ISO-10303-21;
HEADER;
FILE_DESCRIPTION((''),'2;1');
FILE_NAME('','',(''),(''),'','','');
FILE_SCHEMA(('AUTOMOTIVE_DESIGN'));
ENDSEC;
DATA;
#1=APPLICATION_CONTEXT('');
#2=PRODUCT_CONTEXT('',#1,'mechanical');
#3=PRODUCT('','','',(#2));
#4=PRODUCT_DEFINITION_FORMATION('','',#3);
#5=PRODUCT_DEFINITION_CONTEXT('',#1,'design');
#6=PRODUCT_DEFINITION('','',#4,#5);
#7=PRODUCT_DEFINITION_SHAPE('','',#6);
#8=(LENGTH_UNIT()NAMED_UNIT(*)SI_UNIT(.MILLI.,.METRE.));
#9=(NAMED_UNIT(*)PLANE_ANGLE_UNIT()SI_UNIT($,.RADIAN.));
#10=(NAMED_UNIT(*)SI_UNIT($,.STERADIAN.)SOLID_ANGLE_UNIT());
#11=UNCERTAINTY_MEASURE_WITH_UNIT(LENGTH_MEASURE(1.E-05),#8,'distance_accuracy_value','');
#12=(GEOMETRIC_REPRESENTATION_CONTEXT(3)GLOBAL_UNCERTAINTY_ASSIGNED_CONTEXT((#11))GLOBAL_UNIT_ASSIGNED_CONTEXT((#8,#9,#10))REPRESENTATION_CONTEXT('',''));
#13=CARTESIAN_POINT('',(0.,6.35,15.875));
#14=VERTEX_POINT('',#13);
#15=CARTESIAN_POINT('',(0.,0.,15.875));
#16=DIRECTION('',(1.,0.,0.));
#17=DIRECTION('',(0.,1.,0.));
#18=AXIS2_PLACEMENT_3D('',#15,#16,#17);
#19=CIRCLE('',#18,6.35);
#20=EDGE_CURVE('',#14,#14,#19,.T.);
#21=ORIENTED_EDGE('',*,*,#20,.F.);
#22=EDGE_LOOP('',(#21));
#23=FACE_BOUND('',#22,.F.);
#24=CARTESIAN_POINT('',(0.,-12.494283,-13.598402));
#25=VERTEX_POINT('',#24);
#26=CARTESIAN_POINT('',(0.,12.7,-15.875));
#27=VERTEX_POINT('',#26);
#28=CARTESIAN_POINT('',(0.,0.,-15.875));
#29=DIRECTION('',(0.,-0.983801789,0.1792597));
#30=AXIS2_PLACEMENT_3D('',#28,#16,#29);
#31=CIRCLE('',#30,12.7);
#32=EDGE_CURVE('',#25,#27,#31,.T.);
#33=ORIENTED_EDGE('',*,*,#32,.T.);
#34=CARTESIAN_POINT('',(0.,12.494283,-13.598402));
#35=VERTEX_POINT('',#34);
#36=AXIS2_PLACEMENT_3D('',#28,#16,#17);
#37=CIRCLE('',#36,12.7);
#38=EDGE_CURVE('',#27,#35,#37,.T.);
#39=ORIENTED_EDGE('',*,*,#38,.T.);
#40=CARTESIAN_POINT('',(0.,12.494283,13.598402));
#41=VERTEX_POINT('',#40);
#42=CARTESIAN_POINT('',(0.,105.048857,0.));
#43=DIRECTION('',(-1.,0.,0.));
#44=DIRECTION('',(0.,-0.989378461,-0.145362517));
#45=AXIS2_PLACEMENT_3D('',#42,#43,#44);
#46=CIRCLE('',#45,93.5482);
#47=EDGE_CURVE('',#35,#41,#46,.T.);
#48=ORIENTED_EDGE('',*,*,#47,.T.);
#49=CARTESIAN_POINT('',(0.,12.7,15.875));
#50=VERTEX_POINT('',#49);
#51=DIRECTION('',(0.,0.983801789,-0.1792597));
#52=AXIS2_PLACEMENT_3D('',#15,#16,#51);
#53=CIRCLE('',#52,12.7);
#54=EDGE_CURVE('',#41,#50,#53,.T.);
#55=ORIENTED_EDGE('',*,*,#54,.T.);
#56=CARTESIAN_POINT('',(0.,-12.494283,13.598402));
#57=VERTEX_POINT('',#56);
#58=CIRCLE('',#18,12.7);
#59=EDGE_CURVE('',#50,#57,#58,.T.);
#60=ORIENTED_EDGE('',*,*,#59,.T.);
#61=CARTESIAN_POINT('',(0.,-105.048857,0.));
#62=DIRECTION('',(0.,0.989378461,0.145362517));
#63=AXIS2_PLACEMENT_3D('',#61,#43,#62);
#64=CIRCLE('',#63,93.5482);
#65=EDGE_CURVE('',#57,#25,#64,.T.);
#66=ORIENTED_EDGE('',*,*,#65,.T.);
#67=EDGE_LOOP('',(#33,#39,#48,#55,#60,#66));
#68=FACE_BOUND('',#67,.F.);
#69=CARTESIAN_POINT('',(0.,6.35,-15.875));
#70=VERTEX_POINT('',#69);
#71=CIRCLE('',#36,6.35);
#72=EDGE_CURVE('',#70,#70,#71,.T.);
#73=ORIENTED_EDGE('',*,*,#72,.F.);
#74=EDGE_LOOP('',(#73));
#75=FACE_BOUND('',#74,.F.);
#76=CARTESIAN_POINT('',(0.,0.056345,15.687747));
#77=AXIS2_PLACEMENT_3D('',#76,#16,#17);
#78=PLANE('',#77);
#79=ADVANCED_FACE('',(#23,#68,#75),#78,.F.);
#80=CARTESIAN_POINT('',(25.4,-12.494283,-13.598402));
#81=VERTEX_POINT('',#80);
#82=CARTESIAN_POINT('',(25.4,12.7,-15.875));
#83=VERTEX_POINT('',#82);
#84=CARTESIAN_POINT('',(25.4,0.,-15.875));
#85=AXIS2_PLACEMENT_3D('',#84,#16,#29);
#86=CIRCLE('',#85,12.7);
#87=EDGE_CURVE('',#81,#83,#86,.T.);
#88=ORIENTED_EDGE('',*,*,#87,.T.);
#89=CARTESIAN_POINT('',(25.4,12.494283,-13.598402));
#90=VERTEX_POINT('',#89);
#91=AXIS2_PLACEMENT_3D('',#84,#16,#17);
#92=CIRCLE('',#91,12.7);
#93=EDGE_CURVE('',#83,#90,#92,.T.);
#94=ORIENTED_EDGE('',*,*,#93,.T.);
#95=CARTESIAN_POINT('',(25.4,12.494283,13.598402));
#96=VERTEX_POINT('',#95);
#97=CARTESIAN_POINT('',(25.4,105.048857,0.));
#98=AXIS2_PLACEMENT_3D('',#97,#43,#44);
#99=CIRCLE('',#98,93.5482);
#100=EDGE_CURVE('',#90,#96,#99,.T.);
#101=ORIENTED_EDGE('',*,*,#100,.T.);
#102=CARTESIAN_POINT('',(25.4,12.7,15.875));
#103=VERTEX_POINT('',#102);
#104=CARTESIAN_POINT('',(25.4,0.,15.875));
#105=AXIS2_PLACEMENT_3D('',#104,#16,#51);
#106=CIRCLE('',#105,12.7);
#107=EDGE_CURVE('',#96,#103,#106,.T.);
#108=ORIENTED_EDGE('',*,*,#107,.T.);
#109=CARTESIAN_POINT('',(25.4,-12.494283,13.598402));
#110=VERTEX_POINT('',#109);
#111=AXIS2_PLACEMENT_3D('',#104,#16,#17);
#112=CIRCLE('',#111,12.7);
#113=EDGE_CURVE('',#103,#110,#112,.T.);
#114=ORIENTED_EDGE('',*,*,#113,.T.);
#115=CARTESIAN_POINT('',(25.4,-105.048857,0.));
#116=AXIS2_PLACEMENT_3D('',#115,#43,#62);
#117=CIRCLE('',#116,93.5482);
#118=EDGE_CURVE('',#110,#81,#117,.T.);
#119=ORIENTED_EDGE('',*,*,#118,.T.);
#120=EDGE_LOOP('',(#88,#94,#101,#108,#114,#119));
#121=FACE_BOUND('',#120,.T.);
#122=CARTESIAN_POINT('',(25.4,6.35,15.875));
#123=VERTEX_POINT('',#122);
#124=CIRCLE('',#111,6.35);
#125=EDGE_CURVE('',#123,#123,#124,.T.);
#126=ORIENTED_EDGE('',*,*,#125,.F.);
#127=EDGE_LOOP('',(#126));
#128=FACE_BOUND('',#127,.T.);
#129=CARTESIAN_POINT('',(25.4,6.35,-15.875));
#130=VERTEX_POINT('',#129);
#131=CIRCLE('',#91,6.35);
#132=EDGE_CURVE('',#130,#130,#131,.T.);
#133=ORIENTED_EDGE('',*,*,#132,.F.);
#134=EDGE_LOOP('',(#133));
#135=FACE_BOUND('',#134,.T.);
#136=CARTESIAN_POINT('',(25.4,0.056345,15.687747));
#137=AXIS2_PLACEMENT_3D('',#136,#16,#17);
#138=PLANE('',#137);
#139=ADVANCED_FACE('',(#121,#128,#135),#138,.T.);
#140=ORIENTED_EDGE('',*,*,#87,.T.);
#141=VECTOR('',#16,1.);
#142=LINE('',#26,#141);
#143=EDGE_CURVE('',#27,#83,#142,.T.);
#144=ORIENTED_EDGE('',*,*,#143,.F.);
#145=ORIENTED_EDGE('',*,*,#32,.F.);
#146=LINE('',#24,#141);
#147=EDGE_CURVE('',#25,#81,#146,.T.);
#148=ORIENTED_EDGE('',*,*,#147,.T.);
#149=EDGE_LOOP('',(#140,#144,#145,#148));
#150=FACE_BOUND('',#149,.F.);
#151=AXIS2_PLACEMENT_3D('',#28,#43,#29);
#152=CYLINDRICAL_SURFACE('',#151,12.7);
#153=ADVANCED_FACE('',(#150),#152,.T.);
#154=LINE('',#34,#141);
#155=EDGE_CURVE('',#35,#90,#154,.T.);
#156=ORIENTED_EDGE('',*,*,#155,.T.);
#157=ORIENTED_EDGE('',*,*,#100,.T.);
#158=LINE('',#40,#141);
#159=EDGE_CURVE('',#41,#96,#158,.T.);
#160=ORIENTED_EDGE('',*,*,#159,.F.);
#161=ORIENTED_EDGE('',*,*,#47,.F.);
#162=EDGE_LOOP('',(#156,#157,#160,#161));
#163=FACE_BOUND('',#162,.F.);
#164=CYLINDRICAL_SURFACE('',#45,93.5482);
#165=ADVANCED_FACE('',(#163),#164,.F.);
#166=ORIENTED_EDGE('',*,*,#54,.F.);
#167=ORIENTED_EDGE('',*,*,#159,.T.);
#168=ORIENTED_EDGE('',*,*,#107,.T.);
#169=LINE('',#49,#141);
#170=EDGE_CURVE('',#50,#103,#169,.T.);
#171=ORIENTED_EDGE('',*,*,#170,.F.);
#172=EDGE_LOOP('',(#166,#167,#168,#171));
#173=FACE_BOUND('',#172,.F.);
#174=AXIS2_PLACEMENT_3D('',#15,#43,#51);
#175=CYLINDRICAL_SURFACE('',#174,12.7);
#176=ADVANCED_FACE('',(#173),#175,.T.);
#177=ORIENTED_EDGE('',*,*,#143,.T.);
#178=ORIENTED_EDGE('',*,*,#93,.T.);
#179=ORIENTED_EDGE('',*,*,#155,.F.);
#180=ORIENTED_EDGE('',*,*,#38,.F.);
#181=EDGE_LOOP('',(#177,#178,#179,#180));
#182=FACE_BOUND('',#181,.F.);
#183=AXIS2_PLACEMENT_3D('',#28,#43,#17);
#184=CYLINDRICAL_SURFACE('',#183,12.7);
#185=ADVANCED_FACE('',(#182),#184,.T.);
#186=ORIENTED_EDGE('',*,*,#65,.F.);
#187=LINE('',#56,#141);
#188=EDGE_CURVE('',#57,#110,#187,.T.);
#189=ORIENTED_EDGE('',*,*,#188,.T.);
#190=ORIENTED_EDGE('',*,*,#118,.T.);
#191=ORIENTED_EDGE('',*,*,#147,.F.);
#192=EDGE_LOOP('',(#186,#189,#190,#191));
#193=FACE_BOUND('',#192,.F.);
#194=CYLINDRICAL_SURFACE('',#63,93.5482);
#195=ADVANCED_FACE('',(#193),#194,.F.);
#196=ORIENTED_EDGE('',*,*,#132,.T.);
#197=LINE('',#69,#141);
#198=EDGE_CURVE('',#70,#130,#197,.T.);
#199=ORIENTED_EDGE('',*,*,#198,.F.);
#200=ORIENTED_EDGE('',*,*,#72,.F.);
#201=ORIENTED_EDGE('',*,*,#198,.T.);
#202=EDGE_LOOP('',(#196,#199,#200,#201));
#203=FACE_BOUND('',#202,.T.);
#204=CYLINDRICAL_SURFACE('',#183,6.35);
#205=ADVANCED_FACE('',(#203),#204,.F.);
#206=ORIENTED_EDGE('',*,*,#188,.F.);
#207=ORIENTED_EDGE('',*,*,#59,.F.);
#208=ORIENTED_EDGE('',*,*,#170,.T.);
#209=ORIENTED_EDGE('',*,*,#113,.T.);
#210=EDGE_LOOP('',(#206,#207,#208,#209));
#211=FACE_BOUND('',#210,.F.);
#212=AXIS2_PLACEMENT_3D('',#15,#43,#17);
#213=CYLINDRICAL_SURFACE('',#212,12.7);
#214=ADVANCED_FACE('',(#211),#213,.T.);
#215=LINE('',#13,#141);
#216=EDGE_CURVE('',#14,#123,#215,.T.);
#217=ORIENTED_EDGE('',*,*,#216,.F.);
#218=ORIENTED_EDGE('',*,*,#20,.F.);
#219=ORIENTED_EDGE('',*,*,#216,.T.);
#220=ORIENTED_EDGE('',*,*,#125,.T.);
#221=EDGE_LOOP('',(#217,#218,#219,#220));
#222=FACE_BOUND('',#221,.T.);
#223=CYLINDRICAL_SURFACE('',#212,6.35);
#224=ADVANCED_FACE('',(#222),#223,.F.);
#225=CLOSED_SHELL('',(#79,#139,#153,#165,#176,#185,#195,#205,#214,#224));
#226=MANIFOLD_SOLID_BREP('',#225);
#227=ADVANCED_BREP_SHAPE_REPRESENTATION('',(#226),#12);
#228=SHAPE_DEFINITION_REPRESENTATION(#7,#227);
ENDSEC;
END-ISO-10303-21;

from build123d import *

# Parameters (mm, degrees)
F0_R     = 6.35
F1_DEPTH = 25.4


# Not quite as in the source:
# - a feature names something its author has since deleted; it is built from what else it names


with BuildPart() as f1:
    # F0 (on Right) → F1 (new body)
    with BuildSketch(Plane.YZ):
        with BuildLine():
            ThreePointArc((12.4942827194, 13.5984018078), (12.6484661231, 14.7320631111), (12.7, 15.875))
            ThreePointArc((12.7, 15.875), (-1.1429368889, 28.5234661231), (-12.4942827194, 13.5984018078))
            ThreePointArc((-12.4942827194, 13.5984018078), (0, 3.175), (12.4942827194, 13.5984018078))
        make_face()
        with Locations((0, 15.875)):
            Circle(F0_R, mode=Mode.SUBTRACT)
        with BuildLine():
            ThreePointArc((12.4942827194, -13.5984018078), (0, -3.175), (-12.4942827194, -13.5984018078))
            ThreePointArc((-12.4942827194, -13.5984018078), (-1.1429368889, -28.5234661231), (12.7, -15.875))
            ThreePointArc((12.7, -15.875), (12.6484661231, -14.7320631111), (12.4942827194, -13.5984018078))
        make_face()
        with Locations((0, -15.875)):
            Circle(F0_R, mode=Mode.SUBTRACT)
        with BuildLine():
            ThreePointArc((12.4942827194, 13.5984018078), (0, 3.175), (-12.4942827194, 13.5984018078))
            ThreePointArc((-12.4942827194, 13.5984018078), (-11.5006568446, 0), (-12.4942827194, -13.5984018078))
            ThreePointArc((-12.4942827194, -13.5984018078), (0, -3.175), (12.4942827194, -13.5984018078))
            ThreePointArc((12.4942827194, -13.5984018078), (11.5006568446, 0), (12.4942827194, 13.5984018078))
        make_face()
    extrude(amount=F1_DEPTH)


solid = f1.part
